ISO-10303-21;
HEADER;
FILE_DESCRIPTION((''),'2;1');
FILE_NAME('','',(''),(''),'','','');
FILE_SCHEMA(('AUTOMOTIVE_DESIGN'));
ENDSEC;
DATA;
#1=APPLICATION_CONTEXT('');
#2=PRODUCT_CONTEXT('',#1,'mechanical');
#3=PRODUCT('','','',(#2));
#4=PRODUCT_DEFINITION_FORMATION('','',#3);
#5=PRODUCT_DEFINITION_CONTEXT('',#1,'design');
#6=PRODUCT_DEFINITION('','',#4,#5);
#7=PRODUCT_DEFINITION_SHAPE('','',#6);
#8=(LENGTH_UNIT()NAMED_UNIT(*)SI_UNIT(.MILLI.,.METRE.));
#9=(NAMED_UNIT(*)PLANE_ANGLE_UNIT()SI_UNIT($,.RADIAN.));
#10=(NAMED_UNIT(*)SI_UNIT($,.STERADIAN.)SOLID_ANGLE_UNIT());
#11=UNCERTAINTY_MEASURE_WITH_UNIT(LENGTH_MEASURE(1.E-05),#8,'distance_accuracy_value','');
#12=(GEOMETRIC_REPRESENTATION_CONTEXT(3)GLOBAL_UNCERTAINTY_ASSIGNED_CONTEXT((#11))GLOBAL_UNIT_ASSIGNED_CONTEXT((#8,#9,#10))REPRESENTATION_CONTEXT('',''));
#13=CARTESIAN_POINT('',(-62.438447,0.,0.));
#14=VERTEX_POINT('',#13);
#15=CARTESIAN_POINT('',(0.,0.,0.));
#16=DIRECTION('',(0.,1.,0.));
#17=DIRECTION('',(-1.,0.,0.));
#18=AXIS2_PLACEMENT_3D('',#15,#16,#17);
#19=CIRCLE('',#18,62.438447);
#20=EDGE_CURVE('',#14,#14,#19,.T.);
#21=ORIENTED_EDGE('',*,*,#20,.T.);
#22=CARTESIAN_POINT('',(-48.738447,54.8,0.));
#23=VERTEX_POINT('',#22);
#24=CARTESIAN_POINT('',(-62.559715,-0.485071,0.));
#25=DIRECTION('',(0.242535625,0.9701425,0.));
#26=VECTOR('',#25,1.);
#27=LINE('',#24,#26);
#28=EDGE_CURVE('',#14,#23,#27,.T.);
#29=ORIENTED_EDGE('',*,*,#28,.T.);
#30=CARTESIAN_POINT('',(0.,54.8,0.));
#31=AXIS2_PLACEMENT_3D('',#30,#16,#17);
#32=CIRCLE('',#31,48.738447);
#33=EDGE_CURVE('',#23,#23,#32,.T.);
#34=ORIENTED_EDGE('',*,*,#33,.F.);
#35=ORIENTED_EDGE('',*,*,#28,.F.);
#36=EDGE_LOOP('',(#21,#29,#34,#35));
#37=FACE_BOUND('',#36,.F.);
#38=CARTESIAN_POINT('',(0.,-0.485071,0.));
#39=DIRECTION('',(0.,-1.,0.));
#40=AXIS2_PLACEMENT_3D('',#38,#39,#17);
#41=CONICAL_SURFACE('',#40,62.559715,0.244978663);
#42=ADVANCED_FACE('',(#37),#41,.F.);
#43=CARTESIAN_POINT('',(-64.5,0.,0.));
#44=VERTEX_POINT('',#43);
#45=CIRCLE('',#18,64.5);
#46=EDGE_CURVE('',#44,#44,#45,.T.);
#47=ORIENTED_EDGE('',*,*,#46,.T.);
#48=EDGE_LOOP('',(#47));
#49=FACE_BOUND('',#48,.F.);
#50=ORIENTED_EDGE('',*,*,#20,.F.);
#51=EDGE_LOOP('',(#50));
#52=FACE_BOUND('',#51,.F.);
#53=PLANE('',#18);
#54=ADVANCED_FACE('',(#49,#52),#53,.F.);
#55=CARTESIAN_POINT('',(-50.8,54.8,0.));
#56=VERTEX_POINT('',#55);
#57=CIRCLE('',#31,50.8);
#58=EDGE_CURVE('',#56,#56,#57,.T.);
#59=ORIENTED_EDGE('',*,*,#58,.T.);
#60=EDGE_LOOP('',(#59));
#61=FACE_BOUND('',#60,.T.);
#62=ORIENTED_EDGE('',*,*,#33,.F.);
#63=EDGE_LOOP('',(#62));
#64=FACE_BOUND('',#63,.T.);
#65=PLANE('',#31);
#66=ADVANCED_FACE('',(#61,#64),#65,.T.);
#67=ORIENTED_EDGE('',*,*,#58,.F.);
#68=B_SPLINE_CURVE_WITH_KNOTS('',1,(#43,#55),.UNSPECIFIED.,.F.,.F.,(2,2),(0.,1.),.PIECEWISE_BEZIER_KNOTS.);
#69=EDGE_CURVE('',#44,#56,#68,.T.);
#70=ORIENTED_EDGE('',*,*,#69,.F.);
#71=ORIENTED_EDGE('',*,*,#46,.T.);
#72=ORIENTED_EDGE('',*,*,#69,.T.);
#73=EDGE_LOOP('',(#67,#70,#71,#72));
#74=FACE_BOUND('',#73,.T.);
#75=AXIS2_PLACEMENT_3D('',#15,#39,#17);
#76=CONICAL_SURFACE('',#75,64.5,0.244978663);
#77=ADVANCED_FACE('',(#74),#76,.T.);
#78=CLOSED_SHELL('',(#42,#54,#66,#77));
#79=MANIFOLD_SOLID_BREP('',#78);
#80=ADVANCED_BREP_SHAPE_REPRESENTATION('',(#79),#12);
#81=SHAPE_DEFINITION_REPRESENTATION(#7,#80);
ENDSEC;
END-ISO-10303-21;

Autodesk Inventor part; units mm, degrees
ref_plane "YZ Plane" through (0, 0, 0) normal (1, 0, 0) x (0, 1, 0)
ref_plane "XY Plane" through (0, 0, 0) normal (0, 0, 1) x (1, 0, 0)
sketch "Szkic6" plane through (0, 0, 0) normal (0, 1, 0) x (-1, 0, 0)
  circle A0 centre (0, 0) radius 64.5
  dimension "d33" = 129
ref_plane "Płaszczyzna konstrukcyjna1" through (0, 54.8, 0) normal (0, 1, 0) x (-1, 0, 0)
sketch "Szkic7" plane through (0, 54.8, 0) normal (0, 1, 0) x (-1, 0, 0)
  circle A0 centre (0, 0) radius 50.8
  dimension "d35" = 101.6
loft "Wyciągnięcie złożone1" add profiles "Szkic6", "Szkic7"
shell "Skorupa1" thickness 2 removed faces 2 at (7.3018, 54.8, 11.5135) at (-10.0865, 0, -16.1433)
equation "\"d33\" = OD1"
equation "\"d35\" = OD2"
equation "\"d52\" = THK"
equation "\"SzerokośćGięciaPodcięcia\" = Grubość"
equation "\"RozmiarPodcięciaNarożnika\" = 4 * Grubość"
equation "\"PromieńPrzejścia\" = PromieńGięcia"
equation "\"Rozmiar_promienia_Jacobiego\" = PromieńGięcia"
equation "\"Wielk_odstępu\" = Grubość"
equation "\"d2\" = PromieńGięcia"
equation "\"d23\" = PromieńGięcia"
equation "\"OD1\" = 129"
equation "\"OD2\" = 101.6"
equation "\"L\" = 54.8"
equation "\"THK\" = 2"
equation "\"d34\" = L"
equation "\"Grubość\" = 1.5"
equation "\"PromieńGięcia\" = 3"
properties part number "Redukcja symetryczna Ø129x101,6x2 L=54,8" material "304"
